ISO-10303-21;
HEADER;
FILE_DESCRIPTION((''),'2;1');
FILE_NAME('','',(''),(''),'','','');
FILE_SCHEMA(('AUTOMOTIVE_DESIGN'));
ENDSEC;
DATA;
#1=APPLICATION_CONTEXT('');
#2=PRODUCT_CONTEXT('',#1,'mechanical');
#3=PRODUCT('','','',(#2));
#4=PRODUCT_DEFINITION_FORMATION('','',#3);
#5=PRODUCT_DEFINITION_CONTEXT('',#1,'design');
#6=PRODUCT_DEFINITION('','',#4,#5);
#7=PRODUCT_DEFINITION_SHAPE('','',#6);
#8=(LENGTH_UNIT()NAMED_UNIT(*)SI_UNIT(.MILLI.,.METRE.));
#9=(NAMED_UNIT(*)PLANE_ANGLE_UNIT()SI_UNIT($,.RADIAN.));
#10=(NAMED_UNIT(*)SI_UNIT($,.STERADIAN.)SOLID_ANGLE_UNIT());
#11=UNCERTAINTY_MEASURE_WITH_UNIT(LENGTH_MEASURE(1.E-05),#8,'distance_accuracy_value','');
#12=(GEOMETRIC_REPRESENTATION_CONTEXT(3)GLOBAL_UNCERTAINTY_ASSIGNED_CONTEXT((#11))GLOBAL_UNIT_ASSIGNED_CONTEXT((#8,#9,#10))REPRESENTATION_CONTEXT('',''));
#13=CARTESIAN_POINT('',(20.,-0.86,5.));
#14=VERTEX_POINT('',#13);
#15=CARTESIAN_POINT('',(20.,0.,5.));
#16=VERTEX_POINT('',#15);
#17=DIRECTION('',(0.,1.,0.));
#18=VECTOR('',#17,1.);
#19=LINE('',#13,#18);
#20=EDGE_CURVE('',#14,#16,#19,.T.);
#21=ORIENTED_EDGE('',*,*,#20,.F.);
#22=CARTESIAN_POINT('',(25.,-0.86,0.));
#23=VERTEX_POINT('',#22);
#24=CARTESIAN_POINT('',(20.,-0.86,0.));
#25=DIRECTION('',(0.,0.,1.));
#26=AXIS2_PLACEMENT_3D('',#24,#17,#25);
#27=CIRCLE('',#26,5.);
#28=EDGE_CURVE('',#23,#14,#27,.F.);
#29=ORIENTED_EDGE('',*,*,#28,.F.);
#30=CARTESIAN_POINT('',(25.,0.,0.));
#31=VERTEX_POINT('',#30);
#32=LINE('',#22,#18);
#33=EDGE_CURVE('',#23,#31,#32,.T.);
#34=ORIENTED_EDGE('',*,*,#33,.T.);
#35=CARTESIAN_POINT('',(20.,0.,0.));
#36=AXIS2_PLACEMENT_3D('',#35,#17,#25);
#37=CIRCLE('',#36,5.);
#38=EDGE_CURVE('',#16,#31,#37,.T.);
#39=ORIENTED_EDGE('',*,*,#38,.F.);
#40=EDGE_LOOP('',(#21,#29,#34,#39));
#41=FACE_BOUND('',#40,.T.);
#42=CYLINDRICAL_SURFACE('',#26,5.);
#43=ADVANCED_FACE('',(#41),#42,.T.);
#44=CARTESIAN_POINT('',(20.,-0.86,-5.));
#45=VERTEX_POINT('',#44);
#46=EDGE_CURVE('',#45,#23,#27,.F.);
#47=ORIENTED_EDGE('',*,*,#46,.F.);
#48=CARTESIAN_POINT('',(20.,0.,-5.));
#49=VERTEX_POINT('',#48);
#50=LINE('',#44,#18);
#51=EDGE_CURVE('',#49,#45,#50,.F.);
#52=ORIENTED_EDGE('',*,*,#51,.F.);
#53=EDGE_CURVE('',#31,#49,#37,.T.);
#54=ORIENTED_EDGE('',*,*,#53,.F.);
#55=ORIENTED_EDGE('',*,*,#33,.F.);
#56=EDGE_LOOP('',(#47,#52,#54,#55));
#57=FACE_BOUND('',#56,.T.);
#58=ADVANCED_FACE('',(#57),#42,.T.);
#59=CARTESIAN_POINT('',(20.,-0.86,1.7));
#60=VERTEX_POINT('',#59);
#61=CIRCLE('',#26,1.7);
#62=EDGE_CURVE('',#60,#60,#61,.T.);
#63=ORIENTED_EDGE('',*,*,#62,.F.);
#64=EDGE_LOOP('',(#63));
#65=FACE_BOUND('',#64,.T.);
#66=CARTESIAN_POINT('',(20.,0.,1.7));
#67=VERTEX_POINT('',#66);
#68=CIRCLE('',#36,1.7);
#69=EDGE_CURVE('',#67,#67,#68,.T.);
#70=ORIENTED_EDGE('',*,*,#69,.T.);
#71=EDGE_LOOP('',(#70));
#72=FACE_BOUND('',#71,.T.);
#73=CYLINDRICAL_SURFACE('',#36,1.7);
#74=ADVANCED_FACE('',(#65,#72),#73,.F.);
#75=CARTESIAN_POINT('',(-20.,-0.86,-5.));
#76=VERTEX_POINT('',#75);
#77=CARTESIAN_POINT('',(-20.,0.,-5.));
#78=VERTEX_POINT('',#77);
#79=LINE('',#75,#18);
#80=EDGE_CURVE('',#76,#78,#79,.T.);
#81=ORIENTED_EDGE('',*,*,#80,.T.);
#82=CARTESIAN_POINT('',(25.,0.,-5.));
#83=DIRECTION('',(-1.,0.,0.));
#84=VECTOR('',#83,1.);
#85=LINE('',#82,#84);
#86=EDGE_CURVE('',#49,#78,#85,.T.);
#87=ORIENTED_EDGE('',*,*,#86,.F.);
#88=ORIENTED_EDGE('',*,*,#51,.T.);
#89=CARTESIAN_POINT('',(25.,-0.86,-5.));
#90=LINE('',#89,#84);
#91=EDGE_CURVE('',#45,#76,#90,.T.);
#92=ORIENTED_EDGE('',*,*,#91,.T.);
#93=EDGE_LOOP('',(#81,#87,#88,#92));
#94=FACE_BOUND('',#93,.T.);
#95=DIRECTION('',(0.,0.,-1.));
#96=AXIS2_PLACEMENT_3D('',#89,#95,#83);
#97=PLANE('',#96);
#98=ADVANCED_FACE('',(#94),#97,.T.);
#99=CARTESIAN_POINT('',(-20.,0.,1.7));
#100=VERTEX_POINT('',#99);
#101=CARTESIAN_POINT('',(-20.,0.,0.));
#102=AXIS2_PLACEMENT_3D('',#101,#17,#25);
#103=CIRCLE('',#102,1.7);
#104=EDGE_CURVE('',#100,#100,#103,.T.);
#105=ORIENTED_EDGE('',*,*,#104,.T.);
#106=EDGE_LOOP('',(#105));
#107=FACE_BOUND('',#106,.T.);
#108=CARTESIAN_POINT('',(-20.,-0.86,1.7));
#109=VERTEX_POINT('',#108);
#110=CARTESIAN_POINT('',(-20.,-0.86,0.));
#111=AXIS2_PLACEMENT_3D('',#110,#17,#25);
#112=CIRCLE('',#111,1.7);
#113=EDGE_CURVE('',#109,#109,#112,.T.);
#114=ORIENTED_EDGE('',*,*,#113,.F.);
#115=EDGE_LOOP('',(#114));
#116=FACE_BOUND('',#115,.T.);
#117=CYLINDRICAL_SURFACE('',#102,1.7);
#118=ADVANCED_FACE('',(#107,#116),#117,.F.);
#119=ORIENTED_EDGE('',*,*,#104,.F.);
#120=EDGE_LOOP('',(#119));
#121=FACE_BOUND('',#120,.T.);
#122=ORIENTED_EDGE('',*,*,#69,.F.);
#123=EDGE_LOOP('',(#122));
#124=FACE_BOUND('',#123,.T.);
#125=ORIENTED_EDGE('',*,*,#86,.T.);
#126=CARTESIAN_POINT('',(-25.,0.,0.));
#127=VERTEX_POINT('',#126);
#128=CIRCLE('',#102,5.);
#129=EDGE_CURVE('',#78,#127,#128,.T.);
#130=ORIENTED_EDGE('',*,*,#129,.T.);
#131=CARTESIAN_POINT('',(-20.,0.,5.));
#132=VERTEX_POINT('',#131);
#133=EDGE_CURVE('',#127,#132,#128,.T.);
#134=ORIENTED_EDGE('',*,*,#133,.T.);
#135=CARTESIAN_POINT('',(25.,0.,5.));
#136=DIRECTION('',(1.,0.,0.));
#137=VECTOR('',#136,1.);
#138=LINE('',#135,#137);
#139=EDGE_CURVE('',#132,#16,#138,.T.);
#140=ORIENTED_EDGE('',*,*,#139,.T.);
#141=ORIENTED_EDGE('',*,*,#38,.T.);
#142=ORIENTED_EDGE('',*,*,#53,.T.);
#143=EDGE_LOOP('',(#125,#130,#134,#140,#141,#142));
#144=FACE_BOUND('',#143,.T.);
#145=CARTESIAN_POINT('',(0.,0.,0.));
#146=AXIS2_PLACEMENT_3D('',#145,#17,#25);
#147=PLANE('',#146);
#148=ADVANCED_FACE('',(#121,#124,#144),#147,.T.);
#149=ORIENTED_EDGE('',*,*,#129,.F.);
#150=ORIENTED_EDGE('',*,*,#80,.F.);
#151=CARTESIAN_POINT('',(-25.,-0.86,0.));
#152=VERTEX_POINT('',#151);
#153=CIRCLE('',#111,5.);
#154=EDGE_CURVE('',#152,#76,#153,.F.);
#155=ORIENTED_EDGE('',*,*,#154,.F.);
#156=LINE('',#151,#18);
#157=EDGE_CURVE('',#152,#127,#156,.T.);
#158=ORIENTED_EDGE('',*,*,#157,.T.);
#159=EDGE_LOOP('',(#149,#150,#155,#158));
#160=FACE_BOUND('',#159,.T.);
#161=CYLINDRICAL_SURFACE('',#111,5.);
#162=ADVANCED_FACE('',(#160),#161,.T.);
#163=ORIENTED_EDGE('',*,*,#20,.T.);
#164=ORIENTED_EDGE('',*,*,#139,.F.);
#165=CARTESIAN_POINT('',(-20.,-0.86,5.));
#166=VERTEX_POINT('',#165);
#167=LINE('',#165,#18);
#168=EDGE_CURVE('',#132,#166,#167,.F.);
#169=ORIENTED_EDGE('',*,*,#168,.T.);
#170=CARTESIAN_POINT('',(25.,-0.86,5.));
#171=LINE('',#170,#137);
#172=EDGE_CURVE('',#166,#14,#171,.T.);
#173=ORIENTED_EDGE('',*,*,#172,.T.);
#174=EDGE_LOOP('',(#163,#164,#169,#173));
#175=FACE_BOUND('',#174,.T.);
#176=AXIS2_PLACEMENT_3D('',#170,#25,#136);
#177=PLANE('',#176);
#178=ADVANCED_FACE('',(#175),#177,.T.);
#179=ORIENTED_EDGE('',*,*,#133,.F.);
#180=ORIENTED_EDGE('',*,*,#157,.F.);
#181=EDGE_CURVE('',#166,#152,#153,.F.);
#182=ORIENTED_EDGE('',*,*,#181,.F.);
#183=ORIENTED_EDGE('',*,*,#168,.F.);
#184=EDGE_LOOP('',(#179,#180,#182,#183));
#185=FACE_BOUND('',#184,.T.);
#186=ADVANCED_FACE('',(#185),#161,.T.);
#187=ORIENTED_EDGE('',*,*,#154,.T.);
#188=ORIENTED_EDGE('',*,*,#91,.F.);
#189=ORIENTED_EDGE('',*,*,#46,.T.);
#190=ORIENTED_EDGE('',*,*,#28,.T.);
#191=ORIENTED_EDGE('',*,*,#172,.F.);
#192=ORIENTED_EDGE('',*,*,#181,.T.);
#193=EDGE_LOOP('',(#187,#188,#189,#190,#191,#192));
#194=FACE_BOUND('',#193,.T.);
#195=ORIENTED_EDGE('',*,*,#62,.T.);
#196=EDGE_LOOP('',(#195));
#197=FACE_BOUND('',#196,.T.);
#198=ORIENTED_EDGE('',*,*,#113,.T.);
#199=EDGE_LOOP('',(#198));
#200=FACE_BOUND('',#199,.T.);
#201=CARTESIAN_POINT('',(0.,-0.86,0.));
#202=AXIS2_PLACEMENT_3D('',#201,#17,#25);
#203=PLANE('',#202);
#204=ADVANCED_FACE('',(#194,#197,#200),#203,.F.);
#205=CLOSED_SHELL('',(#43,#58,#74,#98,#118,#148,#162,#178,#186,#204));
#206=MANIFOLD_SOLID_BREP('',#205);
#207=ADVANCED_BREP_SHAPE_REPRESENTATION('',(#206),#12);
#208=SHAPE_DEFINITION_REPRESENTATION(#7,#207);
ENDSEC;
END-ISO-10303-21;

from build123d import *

# Parameters (mm, degrees)
SKETCH1_W                = 50
SKETCH1_H                = 10
BASE_FLANGE1_DEPTH       = 0.86
M3_CLEARANCE_HOLE1_D     = 3.4
M3_CLEARANCE_HOLE1_DEPTH = 1.29
M3_CLEARANCE_HOLE1_TIP   = 1.021463052
FILLET1_R                = 5


# Sheet-metal steps are written as plain solids
with BuildPart() as part:
    # Sketch1 → Base-Flange1 (new body)
    with BuildSketch(Plane(origin=(0, 0, 0), x_dir=(1, 0, 0), z_dir=(0, 1, 0))):
        Rectangle(SKETCH1_W, SKETCH1_H)
    extrude(amount=-BASE_FLANGE1_DEPTH)

    # M3 Clearance Hole1
    with Locations(Plane(origin=(0, 0, 0), x_dir=(1, 0, 0), z_dir=(0, 1, 0))):
        with Locations((-20, 0), (20, 0)):
            Hole(M3_CLEARANCE_HOLE1_D / 2, depth=M3_CLEARANCE_HOLE1_DEPTH)
            with Locations((0, 0, -(M3_CLEARANCE_HOLE1_DEPTH + M3_CLEARANCE_HOLE1_TIP / 2))):  # 118° drill point
                Cone(0, M3_CLEARANCE_HOLE1_D / 2, M3_CLEARANCE_HOLE1_TIP, mode=Mode.SUBTRACT)

    # Fillet1
    fillet1_edges = [part.edges().sort_by_distance(p)[0] for p in [
        (25, -0.43, 5),
        (25, -0.43, -5),
        (-25, -0.43, -5),
        (-25, -0.43, 5),
    ]]
    fillet(fillet1_edges, radius=FILLET1_R - 0.0001)  # a hair under: the kernel refuses the full size


solid = part.part
